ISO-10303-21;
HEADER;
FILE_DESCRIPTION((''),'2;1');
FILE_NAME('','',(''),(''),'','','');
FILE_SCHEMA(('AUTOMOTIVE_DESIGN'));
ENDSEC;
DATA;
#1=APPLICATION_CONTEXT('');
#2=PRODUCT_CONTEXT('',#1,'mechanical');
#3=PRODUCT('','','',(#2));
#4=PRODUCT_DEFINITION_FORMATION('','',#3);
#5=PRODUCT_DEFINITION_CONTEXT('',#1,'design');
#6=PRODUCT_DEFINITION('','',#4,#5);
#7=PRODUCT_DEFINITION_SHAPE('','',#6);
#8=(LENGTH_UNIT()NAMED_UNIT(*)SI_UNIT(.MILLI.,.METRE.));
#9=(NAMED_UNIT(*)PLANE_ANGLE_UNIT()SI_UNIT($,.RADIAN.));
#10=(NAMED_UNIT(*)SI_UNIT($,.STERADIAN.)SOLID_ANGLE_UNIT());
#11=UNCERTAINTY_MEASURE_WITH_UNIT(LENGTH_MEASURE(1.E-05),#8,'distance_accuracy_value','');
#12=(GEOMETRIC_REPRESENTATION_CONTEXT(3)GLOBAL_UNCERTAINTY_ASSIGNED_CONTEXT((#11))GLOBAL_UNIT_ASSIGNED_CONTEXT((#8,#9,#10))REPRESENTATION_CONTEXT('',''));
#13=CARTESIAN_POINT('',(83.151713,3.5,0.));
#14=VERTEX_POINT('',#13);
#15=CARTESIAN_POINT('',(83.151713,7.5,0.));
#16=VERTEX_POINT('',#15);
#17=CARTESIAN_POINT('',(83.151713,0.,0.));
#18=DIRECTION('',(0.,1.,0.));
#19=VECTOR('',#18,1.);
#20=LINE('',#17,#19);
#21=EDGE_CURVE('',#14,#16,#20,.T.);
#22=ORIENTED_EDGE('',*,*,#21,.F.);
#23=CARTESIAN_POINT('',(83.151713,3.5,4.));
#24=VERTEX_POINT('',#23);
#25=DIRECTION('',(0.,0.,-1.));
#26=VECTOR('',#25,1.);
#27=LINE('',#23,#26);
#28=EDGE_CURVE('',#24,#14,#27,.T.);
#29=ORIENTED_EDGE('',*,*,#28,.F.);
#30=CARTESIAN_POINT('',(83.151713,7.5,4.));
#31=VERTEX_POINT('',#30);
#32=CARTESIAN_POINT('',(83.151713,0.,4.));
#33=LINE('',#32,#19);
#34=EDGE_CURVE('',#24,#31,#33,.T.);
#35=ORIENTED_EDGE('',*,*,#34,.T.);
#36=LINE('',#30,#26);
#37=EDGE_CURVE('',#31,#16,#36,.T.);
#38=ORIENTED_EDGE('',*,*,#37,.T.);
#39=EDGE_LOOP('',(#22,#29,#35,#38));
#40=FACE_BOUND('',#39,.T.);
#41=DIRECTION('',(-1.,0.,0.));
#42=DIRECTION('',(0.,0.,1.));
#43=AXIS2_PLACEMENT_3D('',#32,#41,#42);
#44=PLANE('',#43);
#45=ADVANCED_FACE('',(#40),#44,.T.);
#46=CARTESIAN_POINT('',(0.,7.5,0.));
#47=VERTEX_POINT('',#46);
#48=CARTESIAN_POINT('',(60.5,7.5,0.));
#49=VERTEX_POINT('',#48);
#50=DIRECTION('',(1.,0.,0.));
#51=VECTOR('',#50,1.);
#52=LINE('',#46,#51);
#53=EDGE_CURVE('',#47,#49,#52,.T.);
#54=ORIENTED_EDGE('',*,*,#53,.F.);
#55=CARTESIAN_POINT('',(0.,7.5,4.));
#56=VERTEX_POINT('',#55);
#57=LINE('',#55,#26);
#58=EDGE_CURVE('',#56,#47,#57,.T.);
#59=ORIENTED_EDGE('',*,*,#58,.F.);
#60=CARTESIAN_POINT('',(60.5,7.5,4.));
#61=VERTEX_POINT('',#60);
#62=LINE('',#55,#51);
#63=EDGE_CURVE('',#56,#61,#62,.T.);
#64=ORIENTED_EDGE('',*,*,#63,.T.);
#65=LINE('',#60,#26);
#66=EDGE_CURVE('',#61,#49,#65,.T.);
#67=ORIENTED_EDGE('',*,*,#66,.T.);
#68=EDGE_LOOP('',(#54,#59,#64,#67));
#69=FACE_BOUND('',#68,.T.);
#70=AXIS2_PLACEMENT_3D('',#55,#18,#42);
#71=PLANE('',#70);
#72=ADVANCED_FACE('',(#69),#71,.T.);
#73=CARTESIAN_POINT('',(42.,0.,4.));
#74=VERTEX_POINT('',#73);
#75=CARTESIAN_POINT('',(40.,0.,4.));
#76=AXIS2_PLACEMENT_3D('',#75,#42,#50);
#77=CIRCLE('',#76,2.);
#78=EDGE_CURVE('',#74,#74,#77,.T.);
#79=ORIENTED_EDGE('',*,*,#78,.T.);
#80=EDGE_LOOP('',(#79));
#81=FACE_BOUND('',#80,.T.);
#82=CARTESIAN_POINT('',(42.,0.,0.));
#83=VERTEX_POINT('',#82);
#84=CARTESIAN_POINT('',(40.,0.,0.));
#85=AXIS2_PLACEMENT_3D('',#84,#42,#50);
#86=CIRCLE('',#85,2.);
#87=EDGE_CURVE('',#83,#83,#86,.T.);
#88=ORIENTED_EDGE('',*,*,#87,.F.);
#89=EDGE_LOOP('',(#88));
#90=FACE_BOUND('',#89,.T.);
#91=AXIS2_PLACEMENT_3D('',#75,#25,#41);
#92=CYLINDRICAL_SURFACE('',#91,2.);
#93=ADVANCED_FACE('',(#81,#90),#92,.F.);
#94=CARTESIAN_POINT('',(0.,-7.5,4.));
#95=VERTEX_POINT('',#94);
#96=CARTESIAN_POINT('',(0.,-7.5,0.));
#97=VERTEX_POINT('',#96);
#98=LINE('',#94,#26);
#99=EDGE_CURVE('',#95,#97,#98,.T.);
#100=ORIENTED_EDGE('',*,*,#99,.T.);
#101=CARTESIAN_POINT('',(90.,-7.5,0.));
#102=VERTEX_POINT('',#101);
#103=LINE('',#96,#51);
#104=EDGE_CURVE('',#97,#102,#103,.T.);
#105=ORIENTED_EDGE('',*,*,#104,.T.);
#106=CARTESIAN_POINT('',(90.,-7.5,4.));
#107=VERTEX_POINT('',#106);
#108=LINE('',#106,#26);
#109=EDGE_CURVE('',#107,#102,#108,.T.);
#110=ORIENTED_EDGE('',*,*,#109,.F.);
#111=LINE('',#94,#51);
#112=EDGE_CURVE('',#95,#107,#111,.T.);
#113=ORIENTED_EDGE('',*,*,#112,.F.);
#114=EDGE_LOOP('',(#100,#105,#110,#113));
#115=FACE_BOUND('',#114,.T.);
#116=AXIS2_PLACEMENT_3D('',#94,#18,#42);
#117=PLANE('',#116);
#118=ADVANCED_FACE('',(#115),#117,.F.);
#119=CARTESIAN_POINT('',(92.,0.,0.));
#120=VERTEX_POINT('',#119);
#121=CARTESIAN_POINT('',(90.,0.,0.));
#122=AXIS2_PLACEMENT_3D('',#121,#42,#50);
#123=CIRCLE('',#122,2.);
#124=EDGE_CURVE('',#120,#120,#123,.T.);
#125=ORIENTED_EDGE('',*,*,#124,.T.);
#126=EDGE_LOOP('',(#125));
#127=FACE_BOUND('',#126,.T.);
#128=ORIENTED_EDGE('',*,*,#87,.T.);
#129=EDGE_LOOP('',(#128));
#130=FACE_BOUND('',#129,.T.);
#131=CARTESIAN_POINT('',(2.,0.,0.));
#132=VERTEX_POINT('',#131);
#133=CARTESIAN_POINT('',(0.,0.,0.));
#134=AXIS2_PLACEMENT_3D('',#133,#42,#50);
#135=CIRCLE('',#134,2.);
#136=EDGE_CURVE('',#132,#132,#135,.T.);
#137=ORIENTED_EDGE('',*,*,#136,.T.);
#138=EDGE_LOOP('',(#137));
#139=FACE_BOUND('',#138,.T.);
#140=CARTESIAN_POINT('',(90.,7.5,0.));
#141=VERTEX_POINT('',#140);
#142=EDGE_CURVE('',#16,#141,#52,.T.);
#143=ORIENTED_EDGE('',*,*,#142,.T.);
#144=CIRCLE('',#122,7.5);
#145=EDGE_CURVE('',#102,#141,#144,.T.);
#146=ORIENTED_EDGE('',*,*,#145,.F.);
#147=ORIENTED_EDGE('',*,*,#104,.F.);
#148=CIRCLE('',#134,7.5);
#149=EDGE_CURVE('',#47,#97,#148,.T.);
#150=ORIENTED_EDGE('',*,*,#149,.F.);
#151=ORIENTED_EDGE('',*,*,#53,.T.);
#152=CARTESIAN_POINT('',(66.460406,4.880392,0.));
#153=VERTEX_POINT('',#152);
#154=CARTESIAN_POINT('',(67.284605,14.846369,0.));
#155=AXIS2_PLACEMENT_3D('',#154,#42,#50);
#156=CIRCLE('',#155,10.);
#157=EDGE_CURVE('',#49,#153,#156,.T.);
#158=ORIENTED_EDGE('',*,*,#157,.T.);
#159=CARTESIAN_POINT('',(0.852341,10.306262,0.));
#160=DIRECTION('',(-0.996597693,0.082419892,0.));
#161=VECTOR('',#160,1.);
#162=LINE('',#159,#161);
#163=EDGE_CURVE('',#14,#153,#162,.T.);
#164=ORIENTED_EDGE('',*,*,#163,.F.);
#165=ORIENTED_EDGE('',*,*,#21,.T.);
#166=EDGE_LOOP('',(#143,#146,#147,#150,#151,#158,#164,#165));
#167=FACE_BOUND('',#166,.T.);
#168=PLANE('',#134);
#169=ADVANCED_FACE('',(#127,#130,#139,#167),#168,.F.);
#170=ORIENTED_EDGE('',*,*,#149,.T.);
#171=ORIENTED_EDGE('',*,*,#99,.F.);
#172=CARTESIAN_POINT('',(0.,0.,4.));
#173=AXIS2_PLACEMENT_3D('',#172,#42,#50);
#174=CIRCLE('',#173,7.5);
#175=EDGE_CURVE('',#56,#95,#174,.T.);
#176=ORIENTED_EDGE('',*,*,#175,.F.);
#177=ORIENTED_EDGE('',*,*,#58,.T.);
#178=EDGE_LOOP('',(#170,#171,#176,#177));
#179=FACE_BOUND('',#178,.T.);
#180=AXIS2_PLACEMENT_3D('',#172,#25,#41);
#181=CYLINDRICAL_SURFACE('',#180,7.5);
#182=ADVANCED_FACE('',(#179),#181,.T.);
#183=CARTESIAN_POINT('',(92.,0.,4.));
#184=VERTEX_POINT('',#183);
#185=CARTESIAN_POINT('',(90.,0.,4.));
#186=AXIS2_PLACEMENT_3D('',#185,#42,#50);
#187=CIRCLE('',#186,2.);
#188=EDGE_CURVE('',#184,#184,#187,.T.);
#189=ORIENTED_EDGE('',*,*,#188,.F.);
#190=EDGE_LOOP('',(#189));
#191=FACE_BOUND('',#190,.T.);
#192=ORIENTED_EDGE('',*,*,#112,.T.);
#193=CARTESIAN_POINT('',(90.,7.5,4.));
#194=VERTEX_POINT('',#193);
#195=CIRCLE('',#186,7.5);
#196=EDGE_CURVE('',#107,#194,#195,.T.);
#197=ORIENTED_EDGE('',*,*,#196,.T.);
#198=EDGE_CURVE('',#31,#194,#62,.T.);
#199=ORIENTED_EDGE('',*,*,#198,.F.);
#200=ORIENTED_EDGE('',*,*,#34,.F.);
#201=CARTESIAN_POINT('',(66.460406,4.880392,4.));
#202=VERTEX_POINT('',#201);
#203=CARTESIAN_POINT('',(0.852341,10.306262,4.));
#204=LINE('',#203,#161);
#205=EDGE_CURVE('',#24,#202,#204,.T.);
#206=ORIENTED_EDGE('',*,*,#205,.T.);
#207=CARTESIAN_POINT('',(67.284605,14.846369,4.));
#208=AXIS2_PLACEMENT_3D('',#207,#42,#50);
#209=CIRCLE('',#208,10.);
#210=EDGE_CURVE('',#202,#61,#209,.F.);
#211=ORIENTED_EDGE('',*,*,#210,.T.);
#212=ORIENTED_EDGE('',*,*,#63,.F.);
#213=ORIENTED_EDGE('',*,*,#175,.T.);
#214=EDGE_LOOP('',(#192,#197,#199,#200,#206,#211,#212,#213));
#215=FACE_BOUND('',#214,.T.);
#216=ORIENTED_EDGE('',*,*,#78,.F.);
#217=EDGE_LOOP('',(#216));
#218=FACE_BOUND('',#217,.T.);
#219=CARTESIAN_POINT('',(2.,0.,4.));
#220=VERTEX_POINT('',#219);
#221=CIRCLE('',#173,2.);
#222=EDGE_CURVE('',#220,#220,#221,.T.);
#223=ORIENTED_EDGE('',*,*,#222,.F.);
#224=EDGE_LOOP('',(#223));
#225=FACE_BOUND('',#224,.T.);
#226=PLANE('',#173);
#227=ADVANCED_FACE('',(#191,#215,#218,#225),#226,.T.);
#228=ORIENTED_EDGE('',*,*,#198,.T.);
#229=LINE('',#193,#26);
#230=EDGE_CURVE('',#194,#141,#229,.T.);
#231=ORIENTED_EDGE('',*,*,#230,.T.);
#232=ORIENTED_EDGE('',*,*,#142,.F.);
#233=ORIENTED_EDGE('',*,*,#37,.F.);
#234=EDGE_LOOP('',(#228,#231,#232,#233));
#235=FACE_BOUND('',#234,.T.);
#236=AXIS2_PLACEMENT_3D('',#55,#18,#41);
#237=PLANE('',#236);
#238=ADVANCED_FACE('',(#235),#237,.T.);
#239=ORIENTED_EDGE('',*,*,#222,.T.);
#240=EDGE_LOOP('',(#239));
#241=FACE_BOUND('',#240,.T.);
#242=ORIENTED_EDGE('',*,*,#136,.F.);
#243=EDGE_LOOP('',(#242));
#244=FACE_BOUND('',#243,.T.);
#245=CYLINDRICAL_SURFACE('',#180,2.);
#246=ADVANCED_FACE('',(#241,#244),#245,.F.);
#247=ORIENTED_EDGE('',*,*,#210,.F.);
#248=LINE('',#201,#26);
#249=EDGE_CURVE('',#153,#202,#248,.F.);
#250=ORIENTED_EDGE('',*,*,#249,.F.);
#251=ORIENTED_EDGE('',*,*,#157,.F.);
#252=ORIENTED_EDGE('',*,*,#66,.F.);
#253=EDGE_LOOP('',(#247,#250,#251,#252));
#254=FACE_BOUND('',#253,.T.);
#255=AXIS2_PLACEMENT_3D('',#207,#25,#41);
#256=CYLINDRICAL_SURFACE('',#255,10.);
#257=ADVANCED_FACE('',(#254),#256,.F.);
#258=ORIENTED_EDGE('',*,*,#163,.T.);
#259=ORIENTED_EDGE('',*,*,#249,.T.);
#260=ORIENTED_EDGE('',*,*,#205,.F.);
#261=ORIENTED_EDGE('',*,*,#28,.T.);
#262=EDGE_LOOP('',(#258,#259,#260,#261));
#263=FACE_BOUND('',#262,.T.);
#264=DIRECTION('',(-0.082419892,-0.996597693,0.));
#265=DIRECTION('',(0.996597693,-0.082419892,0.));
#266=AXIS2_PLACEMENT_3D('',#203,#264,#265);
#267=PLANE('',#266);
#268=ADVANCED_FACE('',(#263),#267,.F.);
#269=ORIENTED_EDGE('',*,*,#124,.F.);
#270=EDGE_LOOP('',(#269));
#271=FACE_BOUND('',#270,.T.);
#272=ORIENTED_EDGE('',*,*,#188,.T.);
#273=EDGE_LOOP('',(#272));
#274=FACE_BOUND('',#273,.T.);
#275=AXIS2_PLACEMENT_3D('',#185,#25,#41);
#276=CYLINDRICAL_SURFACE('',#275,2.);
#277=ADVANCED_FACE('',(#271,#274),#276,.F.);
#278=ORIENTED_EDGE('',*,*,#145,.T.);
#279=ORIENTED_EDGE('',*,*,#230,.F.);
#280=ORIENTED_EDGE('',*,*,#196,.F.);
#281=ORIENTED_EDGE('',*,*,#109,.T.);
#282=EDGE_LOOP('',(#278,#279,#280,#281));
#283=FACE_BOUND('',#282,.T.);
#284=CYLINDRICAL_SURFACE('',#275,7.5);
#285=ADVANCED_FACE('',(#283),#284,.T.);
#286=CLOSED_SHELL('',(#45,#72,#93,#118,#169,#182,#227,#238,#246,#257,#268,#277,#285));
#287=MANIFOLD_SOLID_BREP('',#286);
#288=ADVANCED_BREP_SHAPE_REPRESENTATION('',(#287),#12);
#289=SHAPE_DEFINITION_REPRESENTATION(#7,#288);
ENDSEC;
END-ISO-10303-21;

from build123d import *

# Parameters (mm, degrees)
SKETCH1_R           = 2
BOSS_EXTRUDE1_DEPTH = 4
FILLET1_R           = 10


with BuildPart() as part:
    # Sketch1 → Boss-Extrude1 (new body)
    with BuildSketch(Plane.XY):
        with BuildLine():
            Line((0, 7.5), (60.5, 7.5))
            Line((60.5, 7.5), (62.59580051, 5.2))
            Line((62.59580051, 5.2), (83.151712968, 3.5))
            Line((83.151712968, 3.5), (83.151712968, 7.5))
            Line((83.151712968, 7.5), (90, 7.5))
            ThreePointArc((90, 7.5), (97.5, 0), (90, -7.5))
            Line((90, -7.5), (0, -7.5))
            ThreePointArc((0, -7.5), (-7.5, 0), (0, 7.5))
        make_face()
        Circle(SKETCH1_R, mode=Mode.SUBTRACT)
        with Locations((90, 0)):
            Circle(SKETCH1_R, mode=Mode.SUBTRACT)
        with Locations((40, 0)):
            Circle(SKETCH1_R, mode=Mode.SUBTRACT)
    extrude(amount=BOSS_EXTRUDE1_DEPTH)

    # Fillet1
    # the kernel refuses this fillet: 10 mm, written as the material it adds along each edge
    with BuildSketch(Plane(origin=(62.59580051, 5.2, 0), x_dir=(-0.6735330094671406, 0.7391571451038925, 0), z_dir=(0, 0, 1))) as fillet1_piece_1:
        with BuildLine():
            CenterArc((3.972118366, -9.962911125), FILLET1_R, 94.936211763, 37.995780091)
            Line((-2.839179513, -2.641284173), (-2.97540547, -2.494851634))
            Line((-2.97540547, -2.494851634), (-0.136225958, 0.146432539))
            Line((-0.136225958, 0.146432539), (0, 0.2))
            ThreePointArc((0, 0.2), (1.555826129, 0.2), (3.094442936, 0.199258222))
            Line((3.094442936, 0.199258222), (3.111652259, 0))
        make_face()
    extrude(amount=4)


solid = part.part
